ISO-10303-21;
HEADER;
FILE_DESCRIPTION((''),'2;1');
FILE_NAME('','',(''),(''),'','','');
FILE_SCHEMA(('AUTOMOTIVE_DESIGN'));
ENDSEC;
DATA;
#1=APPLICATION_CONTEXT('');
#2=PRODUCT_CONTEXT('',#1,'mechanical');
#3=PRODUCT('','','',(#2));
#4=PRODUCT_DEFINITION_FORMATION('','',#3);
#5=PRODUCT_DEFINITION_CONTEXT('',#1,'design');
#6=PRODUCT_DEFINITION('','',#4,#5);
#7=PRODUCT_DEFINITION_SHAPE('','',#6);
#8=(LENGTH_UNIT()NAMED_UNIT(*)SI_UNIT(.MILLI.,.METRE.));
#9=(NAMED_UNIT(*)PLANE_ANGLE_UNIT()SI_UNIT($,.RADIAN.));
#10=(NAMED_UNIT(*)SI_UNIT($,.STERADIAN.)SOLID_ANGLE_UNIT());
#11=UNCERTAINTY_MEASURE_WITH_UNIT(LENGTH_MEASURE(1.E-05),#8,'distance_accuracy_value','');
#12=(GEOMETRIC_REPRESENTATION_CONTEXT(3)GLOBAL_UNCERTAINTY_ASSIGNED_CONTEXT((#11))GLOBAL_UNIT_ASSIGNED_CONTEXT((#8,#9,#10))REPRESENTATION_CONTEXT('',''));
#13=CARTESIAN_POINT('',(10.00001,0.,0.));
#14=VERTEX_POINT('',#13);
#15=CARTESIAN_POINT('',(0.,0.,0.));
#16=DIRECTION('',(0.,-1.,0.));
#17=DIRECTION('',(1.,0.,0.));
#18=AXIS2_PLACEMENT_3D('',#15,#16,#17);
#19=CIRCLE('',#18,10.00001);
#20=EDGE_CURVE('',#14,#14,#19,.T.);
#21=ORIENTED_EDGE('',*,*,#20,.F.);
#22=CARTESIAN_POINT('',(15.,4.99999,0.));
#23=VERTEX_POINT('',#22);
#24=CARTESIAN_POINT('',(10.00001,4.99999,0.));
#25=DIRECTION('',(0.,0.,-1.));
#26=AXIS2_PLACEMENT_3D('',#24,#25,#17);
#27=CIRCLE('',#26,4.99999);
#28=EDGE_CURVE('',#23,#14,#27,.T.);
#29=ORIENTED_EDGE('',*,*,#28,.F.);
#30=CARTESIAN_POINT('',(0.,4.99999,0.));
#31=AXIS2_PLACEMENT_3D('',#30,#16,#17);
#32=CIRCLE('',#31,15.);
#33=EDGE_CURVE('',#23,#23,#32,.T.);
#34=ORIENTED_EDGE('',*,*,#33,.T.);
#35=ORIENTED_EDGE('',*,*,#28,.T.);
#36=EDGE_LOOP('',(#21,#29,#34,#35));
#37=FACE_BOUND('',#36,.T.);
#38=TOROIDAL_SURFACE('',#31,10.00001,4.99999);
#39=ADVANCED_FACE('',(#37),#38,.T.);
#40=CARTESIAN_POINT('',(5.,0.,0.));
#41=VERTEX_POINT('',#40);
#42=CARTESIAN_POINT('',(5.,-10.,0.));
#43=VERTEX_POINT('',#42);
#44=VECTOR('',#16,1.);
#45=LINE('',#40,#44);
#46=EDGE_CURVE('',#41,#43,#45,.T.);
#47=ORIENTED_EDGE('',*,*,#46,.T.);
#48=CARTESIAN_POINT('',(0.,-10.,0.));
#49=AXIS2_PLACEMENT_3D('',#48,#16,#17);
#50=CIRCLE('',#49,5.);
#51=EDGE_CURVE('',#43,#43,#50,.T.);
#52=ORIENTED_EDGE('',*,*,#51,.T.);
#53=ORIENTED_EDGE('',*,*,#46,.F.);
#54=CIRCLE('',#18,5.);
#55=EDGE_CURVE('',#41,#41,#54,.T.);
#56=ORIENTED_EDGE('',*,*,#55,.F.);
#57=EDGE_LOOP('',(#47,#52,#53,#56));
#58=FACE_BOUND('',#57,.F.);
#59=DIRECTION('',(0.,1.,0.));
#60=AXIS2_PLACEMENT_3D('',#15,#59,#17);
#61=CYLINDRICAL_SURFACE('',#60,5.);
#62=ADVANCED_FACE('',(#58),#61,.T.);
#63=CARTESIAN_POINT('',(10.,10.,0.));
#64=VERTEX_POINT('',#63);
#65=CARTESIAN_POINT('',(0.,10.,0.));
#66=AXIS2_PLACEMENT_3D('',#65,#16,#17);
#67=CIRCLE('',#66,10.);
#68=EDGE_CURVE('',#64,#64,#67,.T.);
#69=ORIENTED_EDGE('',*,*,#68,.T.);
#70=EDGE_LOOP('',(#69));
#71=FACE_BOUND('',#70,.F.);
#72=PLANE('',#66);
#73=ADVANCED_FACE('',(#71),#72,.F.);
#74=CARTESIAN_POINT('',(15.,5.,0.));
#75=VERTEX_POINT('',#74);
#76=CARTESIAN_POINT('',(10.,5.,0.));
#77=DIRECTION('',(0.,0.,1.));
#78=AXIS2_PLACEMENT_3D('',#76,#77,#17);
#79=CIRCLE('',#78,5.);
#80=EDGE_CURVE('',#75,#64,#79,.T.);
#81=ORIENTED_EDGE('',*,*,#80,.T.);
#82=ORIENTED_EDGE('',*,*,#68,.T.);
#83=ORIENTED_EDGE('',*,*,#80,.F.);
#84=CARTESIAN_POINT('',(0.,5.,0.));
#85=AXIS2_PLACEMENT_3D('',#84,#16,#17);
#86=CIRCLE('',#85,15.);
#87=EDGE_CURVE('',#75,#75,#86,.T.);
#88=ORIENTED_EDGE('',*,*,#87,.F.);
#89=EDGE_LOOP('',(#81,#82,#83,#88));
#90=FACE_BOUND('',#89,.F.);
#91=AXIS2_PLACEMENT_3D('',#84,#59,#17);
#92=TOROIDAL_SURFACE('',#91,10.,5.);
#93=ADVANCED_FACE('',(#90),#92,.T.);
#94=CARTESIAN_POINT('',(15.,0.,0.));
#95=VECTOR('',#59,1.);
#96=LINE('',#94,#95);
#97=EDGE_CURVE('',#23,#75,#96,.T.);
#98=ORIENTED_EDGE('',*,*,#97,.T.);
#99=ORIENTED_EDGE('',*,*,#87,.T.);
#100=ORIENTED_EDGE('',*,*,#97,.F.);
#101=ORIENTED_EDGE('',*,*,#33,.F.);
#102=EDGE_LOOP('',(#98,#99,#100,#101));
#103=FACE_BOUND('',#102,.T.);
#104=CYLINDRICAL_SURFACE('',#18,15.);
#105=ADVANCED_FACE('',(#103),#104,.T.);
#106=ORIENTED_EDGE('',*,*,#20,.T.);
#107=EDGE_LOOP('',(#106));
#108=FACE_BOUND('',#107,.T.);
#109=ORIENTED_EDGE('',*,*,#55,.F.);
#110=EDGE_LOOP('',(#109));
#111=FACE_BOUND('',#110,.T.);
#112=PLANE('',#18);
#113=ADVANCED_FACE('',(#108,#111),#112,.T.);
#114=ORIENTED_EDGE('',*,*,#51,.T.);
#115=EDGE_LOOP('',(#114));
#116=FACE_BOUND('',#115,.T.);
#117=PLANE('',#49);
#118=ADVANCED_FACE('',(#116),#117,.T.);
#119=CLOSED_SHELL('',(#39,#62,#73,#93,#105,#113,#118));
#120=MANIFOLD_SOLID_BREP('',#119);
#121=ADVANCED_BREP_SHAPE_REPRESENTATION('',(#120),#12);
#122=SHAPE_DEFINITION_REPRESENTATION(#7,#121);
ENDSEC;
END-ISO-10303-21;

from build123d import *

# Parameters (mm, degrees)
F0_R     = 15
F1_DEPTH = 10
F2_R     = 5
F3_DEPTH = 10
F4_R     = 5
F5_R     = 4.99999


# Not quite as in the source:
# - a fillet or chamfer is up to 0.001 mm smaller than in the source, because OpenCascade refuses the exact size


with BuildPart() as f1:
    # F0 (on Front) → F1 (new body)
    with BuildSketch(Plane.XZ):
        Circle(F0_R)
    extrude(amount=-F1_DEPTH)

    # F2 (on face) → F3 (join)
    with BuildSketch(Plane.XZ):
        Circle(F2_R)
    extrude(amount=F3_DEPTH)

    # F4
    f4_edges = [f1.edges().sort_by_distance(p)[0] for p in [
        (-15, 10, 0),
    ]]
    fillet(f4_edges, radius=F4_R)

    # F5 (radius 5 in the source; OpenCascade refuses exactly that, so slightly less here)
    f5_edges = [f1.edges().sort_by_distance(p)[0] for p in [
        (-15, 0, 0),
    ]]
    fillet(f5_edges, radius=F5_R)


solid = f1.part
